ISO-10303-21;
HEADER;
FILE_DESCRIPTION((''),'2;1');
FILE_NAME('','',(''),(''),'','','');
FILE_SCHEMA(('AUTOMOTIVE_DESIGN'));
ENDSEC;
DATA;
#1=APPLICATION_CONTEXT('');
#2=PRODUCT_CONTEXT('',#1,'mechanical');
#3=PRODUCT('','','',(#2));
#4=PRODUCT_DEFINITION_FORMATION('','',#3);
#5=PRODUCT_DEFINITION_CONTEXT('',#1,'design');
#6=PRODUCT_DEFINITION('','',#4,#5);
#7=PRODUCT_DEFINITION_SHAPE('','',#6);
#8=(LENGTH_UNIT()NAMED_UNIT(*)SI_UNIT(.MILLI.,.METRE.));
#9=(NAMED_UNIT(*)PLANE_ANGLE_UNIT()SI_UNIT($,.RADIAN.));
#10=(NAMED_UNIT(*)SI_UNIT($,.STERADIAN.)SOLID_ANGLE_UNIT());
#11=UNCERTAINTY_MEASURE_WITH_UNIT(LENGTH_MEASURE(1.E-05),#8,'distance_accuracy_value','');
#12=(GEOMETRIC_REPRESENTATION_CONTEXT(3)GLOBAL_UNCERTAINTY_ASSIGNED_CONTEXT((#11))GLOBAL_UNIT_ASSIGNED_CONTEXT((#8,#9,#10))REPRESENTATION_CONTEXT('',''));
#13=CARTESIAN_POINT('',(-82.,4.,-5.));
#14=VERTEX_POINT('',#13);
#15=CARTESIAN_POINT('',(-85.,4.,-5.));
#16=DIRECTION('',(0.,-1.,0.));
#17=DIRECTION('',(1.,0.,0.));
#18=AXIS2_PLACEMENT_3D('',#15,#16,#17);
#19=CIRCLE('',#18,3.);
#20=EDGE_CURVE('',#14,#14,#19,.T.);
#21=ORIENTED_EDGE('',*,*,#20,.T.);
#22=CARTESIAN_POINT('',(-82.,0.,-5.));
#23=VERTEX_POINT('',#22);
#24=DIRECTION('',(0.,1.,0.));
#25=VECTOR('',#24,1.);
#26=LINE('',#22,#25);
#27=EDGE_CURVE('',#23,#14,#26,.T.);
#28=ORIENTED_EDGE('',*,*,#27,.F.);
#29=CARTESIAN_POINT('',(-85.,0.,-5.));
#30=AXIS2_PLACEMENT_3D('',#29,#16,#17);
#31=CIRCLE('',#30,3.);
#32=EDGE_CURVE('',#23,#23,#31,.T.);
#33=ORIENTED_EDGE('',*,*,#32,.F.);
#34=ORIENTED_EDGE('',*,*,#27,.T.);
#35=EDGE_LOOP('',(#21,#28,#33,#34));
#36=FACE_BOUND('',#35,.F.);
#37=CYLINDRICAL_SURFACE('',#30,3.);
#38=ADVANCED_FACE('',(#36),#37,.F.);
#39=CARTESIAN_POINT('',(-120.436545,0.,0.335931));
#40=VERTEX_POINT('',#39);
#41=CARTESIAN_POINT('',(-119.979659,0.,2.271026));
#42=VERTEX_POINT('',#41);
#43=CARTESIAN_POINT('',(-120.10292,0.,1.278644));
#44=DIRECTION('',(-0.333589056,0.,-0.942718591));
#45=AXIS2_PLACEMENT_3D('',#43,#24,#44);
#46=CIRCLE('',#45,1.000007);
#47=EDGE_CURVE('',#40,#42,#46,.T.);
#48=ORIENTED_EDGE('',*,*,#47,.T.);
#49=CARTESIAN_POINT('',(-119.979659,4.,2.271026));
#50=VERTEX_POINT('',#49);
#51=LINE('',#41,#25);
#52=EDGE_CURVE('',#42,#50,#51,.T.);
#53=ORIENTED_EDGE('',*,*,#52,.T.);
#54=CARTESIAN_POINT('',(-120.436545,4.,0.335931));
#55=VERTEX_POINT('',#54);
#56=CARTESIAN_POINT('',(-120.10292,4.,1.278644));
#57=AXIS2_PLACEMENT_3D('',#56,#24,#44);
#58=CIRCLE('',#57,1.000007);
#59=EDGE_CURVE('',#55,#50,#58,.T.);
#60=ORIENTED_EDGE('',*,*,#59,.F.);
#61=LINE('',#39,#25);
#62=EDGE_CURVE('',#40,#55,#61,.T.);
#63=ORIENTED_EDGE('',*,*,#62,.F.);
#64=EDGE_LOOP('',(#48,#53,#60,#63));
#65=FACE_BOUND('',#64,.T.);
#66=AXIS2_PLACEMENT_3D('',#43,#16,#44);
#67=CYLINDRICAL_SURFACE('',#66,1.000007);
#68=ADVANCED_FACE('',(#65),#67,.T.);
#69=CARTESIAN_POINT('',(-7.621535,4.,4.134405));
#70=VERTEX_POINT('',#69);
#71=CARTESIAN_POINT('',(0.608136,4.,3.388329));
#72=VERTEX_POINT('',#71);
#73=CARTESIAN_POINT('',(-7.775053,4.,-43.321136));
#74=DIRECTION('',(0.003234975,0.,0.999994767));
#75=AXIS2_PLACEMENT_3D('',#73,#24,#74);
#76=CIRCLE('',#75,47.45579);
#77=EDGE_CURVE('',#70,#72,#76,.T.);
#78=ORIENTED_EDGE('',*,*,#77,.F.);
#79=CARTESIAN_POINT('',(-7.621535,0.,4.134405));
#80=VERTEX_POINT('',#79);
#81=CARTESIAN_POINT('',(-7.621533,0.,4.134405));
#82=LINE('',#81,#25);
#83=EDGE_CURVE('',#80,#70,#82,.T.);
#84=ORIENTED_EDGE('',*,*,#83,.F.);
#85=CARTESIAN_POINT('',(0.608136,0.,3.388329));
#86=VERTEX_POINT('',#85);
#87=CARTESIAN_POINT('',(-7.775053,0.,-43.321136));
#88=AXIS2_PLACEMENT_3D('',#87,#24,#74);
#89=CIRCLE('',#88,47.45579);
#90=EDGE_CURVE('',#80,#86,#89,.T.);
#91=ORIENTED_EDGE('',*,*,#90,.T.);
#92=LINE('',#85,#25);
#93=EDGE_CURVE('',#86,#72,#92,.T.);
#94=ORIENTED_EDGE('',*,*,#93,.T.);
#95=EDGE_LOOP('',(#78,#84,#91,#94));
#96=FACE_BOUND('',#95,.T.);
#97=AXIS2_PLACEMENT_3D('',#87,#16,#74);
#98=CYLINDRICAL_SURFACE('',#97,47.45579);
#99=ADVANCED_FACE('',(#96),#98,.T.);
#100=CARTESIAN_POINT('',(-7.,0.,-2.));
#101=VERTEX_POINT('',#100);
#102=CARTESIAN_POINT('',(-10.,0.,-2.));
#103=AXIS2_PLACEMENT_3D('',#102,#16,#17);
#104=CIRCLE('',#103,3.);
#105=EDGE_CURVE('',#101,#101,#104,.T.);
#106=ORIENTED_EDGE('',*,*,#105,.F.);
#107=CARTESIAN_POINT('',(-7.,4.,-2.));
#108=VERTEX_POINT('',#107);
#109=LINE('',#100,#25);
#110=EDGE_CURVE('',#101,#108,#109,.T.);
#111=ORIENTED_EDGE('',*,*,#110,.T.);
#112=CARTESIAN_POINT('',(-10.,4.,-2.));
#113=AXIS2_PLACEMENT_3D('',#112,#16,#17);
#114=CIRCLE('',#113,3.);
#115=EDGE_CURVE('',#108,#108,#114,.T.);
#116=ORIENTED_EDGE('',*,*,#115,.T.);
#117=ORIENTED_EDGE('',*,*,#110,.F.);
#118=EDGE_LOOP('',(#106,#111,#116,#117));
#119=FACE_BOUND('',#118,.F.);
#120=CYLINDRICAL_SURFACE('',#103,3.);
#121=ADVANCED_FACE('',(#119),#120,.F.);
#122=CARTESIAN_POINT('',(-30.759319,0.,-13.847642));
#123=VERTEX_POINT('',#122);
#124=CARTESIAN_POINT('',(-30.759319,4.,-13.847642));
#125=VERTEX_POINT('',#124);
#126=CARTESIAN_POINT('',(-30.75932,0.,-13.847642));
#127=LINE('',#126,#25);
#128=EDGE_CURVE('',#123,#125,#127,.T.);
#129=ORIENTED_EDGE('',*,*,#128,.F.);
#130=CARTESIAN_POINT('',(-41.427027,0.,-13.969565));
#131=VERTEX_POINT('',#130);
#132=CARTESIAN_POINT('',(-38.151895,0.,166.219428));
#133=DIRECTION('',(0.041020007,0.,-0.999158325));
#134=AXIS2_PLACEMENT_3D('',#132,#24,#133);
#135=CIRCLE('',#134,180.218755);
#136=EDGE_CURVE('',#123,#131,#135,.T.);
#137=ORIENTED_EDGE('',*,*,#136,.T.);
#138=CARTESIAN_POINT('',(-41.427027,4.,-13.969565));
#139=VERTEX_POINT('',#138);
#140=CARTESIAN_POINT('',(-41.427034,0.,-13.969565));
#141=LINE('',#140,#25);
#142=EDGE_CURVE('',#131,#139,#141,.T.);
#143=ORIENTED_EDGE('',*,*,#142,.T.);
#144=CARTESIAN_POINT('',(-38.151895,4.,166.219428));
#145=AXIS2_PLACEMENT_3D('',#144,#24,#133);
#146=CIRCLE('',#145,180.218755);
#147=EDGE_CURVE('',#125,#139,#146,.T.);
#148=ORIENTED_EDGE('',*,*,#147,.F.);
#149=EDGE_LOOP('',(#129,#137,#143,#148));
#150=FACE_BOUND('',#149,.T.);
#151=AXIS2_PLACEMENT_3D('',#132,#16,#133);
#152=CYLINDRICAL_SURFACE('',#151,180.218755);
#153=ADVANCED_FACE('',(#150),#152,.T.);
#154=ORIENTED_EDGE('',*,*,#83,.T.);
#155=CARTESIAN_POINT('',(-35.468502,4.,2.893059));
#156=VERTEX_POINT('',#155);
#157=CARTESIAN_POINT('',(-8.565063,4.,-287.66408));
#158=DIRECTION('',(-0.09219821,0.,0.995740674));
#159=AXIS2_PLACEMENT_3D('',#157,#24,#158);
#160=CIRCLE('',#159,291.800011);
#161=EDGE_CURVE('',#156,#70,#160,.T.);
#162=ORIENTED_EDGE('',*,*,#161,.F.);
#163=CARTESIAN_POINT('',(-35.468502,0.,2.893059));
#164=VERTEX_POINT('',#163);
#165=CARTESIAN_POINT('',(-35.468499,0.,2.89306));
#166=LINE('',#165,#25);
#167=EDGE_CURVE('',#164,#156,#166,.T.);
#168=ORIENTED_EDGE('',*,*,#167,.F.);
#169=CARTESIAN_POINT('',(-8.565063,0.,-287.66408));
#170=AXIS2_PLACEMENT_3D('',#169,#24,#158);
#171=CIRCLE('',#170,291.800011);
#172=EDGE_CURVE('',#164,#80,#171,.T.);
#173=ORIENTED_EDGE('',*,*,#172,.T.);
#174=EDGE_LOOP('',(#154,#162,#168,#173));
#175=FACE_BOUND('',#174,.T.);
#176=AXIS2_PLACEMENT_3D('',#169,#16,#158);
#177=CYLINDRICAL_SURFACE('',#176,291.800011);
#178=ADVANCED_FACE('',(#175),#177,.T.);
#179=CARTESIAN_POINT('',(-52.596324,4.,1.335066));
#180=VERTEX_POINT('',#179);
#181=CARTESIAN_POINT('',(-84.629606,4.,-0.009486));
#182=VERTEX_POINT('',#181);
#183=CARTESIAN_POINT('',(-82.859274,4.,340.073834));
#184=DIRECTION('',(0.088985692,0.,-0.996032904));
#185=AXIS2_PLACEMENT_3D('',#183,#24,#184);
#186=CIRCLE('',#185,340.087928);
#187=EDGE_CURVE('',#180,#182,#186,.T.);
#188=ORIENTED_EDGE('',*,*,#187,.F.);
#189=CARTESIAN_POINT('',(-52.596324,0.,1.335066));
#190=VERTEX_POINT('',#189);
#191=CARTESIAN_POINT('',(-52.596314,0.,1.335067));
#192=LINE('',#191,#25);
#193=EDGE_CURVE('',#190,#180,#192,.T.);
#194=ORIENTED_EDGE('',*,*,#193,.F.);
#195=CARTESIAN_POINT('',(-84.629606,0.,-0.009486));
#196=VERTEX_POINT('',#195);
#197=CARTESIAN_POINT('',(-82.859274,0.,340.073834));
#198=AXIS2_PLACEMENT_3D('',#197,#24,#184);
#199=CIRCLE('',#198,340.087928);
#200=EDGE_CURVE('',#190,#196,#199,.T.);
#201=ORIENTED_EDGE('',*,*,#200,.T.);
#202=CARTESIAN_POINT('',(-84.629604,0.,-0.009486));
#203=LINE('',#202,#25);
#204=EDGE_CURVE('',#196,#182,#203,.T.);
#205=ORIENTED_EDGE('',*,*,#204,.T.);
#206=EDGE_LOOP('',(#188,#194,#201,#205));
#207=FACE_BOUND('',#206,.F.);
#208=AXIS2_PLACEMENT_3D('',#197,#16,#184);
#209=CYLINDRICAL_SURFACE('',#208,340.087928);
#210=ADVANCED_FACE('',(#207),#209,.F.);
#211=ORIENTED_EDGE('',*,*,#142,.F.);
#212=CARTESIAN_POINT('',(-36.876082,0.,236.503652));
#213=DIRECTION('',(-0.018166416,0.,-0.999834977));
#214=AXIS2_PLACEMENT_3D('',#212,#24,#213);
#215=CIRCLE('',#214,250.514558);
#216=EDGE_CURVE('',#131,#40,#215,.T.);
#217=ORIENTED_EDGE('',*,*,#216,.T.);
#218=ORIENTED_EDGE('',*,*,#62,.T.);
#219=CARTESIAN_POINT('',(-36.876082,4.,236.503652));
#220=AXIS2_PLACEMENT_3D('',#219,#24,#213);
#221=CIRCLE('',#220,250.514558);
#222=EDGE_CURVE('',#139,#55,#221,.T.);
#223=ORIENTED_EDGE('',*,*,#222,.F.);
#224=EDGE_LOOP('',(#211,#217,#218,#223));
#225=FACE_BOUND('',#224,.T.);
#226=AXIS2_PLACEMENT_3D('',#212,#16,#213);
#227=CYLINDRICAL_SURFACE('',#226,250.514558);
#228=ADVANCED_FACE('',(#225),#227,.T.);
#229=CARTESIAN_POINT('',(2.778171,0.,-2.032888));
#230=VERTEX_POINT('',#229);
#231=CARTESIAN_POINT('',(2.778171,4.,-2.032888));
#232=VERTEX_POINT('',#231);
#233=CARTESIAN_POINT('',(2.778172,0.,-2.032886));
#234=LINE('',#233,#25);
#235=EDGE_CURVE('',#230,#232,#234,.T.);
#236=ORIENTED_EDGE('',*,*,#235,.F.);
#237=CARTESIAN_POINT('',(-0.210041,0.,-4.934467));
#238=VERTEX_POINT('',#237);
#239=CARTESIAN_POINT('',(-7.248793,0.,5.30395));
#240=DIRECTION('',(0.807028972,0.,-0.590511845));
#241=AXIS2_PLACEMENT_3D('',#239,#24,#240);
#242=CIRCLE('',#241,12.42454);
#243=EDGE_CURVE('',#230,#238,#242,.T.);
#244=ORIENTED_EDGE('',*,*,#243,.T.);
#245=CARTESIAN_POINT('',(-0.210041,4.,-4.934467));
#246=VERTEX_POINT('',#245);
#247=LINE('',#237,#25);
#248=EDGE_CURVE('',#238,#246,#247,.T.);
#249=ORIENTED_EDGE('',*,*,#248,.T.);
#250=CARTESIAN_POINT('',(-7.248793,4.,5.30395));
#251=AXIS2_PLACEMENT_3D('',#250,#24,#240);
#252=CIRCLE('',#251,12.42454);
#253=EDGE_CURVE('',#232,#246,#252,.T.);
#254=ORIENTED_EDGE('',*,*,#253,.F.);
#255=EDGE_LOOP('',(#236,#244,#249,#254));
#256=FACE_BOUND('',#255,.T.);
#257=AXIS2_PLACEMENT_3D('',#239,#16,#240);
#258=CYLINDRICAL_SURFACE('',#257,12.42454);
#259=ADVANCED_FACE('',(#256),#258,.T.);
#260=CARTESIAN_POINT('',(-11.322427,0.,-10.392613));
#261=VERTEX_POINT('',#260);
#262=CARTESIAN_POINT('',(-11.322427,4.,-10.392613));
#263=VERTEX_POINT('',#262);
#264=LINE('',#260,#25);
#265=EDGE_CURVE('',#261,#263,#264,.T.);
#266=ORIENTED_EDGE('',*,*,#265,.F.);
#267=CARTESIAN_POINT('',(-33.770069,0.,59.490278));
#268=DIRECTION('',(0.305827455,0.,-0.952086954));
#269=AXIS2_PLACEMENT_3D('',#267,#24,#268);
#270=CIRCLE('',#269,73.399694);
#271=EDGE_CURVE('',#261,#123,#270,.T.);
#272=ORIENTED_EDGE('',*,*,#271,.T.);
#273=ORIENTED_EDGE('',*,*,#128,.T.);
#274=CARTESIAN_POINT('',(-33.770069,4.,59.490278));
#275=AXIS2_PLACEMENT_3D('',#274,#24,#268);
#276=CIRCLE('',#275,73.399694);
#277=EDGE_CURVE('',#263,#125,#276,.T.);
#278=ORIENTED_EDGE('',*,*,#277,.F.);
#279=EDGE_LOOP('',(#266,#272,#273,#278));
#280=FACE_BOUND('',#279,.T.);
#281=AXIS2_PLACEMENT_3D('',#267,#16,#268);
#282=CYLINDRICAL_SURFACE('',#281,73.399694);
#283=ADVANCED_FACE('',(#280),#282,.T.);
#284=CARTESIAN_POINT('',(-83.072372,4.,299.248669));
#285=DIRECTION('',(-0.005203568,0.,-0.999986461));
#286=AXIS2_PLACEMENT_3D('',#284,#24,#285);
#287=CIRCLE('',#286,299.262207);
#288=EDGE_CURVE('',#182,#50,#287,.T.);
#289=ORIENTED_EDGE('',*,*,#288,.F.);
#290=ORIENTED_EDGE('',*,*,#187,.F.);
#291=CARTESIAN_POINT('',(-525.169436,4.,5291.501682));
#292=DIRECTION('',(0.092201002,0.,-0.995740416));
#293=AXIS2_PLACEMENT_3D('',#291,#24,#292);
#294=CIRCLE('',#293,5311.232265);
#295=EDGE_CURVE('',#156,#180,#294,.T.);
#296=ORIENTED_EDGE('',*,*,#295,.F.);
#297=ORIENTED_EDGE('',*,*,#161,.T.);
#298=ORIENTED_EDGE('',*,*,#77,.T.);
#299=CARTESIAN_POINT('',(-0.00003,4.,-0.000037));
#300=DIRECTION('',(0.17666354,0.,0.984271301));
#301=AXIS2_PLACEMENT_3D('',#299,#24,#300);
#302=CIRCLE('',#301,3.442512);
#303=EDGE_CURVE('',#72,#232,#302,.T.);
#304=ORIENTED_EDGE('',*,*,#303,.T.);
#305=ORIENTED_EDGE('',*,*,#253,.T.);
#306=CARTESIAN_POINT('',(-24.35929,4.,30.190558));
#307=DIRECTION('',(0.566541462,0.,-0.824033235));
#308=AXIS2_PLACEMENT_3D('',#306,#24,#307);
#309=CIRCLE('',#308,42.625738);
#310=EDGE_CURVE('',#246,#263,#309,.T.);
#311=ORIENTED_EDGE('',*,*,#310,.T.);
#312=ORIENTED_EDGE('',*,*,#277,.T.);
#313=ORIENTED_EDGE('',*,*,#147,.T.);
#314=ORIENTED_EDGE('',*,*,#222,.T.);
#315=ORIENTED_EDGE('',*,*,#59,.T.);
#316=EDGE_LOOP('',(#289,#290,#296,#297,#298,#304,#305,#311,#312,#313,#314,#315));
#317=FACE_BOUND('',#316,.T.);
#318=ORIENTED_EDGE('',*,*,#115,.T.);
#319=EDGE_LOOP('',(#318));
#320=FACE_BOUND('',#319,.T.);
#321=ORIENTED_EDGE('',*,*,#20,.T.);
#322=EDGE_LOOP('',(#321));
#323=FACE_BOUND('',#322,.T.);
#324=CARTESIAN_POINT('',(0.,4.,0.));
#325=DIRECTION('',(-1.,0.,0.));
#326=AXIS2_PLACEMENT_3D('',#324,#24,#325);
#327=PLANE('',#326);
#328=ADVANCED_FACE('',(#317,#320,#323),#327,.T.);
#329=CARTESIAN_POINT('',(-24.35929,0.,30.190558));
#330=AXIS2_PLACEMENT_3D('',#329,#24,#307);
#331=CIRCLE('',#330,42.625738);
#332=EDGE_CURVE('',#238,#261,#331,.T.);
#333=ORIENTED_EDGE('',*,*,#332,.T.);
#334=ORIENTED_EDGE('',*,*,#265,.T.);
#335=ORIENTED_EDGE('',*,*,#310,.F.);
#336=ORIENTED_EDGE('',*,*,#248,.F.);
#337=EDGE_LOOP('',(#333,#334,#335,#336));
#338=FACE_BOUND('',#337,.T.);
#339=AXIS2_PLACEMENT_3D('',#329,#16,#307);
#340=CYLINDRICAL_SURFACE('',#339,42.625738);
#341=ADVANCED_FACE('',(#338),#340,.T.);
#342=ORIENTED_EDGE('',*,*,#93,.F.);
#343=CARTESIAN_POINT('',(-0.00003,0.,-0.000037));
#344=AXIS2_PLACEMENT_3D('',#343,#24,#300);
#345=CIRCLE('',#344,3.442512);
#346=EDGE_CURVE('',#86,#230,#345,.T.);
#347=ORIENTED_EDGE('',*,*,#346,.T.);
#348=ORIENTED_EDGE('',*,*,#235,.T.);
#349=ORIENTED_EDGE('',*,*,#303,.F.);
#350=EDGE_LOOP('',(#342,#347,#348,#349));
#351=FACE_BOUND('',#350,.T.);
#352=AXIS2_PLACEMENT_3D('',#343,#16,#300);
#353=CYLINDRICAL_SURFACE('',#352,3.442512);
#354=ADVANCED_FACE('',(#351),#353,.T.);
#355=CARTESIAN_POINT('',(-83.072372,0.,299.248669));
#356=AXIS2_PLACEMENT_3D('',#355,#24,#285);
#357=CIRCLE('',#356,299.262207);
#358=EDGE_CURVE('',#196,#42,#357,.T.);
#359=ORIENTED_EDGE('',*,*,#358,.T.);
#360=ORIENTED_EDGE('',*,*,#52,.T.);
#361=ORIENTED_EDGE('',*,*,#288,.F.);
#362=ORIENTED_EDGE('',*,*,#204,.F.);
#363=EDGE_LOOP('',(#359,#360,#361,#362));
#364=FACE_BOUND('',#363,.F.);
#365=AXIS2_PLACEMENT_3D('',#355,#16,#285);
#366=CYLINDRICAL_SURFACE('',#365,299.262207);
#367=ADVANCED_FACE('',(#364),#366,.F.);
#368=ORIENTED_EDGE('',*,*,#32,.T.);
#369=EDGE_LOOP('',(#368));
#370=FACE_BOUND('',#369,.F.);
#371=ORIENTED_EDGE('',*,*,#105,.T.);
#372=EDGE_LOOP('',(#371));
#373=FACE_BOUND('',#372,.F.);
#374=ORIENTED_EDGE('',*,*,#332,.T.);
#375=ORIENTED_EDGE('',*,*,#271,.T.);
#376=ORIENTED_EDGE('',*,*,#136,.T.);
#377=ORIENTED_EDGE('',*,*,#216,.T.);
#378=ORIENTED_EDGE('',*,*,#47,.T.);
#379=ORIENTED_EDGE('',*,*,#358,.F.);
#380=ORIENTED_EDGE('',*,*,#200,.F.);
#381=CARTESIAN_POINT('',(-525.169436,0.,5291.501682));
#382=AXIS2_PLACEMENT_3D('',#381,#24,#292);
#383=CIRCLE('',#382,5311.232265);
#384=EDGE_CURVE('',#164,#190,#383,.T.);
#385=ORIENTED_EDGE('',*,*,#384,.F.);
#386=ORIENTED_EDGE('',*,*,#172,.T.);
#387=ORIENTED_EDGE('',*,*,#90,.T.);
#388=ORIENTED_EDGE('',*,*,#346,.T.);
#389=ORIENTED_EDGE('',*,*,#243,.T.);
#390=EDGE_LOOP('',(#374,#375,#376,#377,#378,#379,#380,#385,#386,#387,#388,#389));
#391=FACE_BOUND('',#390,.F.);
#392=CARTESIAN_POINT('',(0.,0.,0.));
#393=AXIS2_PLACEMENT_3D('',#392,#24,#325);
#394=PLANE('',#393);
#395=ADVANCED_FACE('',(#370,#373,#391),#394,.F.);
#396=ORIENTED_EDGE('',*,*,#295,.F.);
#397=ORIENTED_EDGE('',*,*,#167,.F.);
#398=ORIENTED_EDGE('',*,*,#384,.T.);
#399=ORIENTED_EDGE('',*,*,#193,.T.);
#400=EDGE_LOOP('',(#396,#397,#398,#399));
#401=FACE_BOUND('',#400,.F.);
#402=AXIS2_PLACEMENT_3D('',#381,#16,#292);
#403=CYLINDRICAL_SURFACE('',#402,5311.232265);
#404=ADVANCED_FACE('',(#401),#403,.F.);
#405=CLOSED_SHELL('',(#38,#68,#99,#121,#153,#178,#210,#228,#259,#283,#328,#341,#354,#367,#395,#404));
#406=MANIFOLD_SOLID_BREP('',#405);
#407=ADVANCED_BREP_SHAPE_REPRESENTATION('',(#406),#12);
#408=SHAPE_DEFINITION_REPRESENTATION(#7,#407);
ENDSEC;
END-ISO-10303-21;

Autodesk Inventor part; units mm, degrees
ref_plane "YZ Plane" through (0, 0, 0) normal (1, 0, 0) x (0, 1, 0)
ref_plane "XZ Plane" through (0, 0, 0) normal (0, 1, 0) x (-1, 0, 0)
ref_plane "XY Plane" through (0, 0, 0) normal (0, 0, 1) x (1, 0, 0)
sketch "スケッチ1" plane through (0, 0, 0) normal (0, 1, 0) x (-1, 0, 0)
  arc A0 (120.7701, -0.6068) -> (119.8564, 3.2634) centre (120.103, 1.2786) ccw projected
  arc A1 (41.4452, -14.9694) -> (120.7701, -0.6068) centre (36.8758, 236.5065) ccw projected
  arc A2 (30.7183, -14.8468) -> (41.4452, -14.9694) centre (38.1525, 166.2425) ccw projected
  arc A3 (11.0166, -11.3447) -> (30.7183, -14.8468) centre (33.77, 59.49) ccw projected
  arc A4 (-0.3565, -5.7585) -> (11.0166, -11.3447) centre (24.3575, 30.1875) ccw projected
  arc A5 (-3.5852, -2.6234) -> (-0.3565, -5.7585) centre (7.25, 5.305) ccw projected
  arc A6 (-0.7848, 4.3726) -> (-3.5852, -2.6234) centre (0, 0) ccw projected
  arc A7 (7.6183, 5.1344) -> (-0.7848, 4.3726) centre (7.775, -43.32) ccw projected
  arc A8 (35.5607, 3.8888) -> (7.6183, 5.1344) centre (8.565, -287.665) ccw projected
  arc A9 (35.5607, 3.8888) -> (52.6853, 2.3311) centre (526.9475, 5310.875) ccw projected
  arc A10 (52.6853, 2.3311) -> (84.6244, 0.9905) centre (82.86, 340.0849) ccw projected
  arc A11 (84.6244, 0.9905) -> (119.8564, 3.2634) centre (83.0725, 299.245) ccw projected
extrude "押し出し1" add sketch "スケッチ1" along normal blind 4
sketch "スケッチ2" plane through (0, 0, 0) normal (0, -1, 0) x (1, 0, 0)
  circle A0 centre (-10, -2) radius 3
  circle A1 centre (-85, -5) radius 3
  point P0 (0, 0)
  dimension "d3" = 6
  dimension "d4" = 6
  dimension "d5" = 10
  dimension "d6" = 2
  dimension "d7" = 5
  dimension "d8" = 85
extrude "押し出し2" cut sketch "スケッチ2" against normal through all
thicken "厚み1" operation cut thickness 1 both sides no extend neighbours no toward (-0.2771555, 0, 0.9608251) faces at (-13.1498, 2.6667, -11.9948) (-9.6787, 1.3333, -10.8909) (-35.4848, 2.6667, -14.9797) (-114.3801, 1.3333, -2.7717) (-121.1079, 2.6667, 3.0079) (0.7651, 1.3333, -5.4662) (1.1102, 2.6667, 4.3015) (-0.1407, 1.3333, 4.5295) (-23.1571, 2.6667, 4.7721) (-45.0737, 2.6667, 3.0166) (-70.4143, 2.6667, 1.2143) (-115.9582, 2.6667, 2.8049)
equation "\"d4\" = d3"
properties part number "plate_sf2" material "木材 (オーク)"
